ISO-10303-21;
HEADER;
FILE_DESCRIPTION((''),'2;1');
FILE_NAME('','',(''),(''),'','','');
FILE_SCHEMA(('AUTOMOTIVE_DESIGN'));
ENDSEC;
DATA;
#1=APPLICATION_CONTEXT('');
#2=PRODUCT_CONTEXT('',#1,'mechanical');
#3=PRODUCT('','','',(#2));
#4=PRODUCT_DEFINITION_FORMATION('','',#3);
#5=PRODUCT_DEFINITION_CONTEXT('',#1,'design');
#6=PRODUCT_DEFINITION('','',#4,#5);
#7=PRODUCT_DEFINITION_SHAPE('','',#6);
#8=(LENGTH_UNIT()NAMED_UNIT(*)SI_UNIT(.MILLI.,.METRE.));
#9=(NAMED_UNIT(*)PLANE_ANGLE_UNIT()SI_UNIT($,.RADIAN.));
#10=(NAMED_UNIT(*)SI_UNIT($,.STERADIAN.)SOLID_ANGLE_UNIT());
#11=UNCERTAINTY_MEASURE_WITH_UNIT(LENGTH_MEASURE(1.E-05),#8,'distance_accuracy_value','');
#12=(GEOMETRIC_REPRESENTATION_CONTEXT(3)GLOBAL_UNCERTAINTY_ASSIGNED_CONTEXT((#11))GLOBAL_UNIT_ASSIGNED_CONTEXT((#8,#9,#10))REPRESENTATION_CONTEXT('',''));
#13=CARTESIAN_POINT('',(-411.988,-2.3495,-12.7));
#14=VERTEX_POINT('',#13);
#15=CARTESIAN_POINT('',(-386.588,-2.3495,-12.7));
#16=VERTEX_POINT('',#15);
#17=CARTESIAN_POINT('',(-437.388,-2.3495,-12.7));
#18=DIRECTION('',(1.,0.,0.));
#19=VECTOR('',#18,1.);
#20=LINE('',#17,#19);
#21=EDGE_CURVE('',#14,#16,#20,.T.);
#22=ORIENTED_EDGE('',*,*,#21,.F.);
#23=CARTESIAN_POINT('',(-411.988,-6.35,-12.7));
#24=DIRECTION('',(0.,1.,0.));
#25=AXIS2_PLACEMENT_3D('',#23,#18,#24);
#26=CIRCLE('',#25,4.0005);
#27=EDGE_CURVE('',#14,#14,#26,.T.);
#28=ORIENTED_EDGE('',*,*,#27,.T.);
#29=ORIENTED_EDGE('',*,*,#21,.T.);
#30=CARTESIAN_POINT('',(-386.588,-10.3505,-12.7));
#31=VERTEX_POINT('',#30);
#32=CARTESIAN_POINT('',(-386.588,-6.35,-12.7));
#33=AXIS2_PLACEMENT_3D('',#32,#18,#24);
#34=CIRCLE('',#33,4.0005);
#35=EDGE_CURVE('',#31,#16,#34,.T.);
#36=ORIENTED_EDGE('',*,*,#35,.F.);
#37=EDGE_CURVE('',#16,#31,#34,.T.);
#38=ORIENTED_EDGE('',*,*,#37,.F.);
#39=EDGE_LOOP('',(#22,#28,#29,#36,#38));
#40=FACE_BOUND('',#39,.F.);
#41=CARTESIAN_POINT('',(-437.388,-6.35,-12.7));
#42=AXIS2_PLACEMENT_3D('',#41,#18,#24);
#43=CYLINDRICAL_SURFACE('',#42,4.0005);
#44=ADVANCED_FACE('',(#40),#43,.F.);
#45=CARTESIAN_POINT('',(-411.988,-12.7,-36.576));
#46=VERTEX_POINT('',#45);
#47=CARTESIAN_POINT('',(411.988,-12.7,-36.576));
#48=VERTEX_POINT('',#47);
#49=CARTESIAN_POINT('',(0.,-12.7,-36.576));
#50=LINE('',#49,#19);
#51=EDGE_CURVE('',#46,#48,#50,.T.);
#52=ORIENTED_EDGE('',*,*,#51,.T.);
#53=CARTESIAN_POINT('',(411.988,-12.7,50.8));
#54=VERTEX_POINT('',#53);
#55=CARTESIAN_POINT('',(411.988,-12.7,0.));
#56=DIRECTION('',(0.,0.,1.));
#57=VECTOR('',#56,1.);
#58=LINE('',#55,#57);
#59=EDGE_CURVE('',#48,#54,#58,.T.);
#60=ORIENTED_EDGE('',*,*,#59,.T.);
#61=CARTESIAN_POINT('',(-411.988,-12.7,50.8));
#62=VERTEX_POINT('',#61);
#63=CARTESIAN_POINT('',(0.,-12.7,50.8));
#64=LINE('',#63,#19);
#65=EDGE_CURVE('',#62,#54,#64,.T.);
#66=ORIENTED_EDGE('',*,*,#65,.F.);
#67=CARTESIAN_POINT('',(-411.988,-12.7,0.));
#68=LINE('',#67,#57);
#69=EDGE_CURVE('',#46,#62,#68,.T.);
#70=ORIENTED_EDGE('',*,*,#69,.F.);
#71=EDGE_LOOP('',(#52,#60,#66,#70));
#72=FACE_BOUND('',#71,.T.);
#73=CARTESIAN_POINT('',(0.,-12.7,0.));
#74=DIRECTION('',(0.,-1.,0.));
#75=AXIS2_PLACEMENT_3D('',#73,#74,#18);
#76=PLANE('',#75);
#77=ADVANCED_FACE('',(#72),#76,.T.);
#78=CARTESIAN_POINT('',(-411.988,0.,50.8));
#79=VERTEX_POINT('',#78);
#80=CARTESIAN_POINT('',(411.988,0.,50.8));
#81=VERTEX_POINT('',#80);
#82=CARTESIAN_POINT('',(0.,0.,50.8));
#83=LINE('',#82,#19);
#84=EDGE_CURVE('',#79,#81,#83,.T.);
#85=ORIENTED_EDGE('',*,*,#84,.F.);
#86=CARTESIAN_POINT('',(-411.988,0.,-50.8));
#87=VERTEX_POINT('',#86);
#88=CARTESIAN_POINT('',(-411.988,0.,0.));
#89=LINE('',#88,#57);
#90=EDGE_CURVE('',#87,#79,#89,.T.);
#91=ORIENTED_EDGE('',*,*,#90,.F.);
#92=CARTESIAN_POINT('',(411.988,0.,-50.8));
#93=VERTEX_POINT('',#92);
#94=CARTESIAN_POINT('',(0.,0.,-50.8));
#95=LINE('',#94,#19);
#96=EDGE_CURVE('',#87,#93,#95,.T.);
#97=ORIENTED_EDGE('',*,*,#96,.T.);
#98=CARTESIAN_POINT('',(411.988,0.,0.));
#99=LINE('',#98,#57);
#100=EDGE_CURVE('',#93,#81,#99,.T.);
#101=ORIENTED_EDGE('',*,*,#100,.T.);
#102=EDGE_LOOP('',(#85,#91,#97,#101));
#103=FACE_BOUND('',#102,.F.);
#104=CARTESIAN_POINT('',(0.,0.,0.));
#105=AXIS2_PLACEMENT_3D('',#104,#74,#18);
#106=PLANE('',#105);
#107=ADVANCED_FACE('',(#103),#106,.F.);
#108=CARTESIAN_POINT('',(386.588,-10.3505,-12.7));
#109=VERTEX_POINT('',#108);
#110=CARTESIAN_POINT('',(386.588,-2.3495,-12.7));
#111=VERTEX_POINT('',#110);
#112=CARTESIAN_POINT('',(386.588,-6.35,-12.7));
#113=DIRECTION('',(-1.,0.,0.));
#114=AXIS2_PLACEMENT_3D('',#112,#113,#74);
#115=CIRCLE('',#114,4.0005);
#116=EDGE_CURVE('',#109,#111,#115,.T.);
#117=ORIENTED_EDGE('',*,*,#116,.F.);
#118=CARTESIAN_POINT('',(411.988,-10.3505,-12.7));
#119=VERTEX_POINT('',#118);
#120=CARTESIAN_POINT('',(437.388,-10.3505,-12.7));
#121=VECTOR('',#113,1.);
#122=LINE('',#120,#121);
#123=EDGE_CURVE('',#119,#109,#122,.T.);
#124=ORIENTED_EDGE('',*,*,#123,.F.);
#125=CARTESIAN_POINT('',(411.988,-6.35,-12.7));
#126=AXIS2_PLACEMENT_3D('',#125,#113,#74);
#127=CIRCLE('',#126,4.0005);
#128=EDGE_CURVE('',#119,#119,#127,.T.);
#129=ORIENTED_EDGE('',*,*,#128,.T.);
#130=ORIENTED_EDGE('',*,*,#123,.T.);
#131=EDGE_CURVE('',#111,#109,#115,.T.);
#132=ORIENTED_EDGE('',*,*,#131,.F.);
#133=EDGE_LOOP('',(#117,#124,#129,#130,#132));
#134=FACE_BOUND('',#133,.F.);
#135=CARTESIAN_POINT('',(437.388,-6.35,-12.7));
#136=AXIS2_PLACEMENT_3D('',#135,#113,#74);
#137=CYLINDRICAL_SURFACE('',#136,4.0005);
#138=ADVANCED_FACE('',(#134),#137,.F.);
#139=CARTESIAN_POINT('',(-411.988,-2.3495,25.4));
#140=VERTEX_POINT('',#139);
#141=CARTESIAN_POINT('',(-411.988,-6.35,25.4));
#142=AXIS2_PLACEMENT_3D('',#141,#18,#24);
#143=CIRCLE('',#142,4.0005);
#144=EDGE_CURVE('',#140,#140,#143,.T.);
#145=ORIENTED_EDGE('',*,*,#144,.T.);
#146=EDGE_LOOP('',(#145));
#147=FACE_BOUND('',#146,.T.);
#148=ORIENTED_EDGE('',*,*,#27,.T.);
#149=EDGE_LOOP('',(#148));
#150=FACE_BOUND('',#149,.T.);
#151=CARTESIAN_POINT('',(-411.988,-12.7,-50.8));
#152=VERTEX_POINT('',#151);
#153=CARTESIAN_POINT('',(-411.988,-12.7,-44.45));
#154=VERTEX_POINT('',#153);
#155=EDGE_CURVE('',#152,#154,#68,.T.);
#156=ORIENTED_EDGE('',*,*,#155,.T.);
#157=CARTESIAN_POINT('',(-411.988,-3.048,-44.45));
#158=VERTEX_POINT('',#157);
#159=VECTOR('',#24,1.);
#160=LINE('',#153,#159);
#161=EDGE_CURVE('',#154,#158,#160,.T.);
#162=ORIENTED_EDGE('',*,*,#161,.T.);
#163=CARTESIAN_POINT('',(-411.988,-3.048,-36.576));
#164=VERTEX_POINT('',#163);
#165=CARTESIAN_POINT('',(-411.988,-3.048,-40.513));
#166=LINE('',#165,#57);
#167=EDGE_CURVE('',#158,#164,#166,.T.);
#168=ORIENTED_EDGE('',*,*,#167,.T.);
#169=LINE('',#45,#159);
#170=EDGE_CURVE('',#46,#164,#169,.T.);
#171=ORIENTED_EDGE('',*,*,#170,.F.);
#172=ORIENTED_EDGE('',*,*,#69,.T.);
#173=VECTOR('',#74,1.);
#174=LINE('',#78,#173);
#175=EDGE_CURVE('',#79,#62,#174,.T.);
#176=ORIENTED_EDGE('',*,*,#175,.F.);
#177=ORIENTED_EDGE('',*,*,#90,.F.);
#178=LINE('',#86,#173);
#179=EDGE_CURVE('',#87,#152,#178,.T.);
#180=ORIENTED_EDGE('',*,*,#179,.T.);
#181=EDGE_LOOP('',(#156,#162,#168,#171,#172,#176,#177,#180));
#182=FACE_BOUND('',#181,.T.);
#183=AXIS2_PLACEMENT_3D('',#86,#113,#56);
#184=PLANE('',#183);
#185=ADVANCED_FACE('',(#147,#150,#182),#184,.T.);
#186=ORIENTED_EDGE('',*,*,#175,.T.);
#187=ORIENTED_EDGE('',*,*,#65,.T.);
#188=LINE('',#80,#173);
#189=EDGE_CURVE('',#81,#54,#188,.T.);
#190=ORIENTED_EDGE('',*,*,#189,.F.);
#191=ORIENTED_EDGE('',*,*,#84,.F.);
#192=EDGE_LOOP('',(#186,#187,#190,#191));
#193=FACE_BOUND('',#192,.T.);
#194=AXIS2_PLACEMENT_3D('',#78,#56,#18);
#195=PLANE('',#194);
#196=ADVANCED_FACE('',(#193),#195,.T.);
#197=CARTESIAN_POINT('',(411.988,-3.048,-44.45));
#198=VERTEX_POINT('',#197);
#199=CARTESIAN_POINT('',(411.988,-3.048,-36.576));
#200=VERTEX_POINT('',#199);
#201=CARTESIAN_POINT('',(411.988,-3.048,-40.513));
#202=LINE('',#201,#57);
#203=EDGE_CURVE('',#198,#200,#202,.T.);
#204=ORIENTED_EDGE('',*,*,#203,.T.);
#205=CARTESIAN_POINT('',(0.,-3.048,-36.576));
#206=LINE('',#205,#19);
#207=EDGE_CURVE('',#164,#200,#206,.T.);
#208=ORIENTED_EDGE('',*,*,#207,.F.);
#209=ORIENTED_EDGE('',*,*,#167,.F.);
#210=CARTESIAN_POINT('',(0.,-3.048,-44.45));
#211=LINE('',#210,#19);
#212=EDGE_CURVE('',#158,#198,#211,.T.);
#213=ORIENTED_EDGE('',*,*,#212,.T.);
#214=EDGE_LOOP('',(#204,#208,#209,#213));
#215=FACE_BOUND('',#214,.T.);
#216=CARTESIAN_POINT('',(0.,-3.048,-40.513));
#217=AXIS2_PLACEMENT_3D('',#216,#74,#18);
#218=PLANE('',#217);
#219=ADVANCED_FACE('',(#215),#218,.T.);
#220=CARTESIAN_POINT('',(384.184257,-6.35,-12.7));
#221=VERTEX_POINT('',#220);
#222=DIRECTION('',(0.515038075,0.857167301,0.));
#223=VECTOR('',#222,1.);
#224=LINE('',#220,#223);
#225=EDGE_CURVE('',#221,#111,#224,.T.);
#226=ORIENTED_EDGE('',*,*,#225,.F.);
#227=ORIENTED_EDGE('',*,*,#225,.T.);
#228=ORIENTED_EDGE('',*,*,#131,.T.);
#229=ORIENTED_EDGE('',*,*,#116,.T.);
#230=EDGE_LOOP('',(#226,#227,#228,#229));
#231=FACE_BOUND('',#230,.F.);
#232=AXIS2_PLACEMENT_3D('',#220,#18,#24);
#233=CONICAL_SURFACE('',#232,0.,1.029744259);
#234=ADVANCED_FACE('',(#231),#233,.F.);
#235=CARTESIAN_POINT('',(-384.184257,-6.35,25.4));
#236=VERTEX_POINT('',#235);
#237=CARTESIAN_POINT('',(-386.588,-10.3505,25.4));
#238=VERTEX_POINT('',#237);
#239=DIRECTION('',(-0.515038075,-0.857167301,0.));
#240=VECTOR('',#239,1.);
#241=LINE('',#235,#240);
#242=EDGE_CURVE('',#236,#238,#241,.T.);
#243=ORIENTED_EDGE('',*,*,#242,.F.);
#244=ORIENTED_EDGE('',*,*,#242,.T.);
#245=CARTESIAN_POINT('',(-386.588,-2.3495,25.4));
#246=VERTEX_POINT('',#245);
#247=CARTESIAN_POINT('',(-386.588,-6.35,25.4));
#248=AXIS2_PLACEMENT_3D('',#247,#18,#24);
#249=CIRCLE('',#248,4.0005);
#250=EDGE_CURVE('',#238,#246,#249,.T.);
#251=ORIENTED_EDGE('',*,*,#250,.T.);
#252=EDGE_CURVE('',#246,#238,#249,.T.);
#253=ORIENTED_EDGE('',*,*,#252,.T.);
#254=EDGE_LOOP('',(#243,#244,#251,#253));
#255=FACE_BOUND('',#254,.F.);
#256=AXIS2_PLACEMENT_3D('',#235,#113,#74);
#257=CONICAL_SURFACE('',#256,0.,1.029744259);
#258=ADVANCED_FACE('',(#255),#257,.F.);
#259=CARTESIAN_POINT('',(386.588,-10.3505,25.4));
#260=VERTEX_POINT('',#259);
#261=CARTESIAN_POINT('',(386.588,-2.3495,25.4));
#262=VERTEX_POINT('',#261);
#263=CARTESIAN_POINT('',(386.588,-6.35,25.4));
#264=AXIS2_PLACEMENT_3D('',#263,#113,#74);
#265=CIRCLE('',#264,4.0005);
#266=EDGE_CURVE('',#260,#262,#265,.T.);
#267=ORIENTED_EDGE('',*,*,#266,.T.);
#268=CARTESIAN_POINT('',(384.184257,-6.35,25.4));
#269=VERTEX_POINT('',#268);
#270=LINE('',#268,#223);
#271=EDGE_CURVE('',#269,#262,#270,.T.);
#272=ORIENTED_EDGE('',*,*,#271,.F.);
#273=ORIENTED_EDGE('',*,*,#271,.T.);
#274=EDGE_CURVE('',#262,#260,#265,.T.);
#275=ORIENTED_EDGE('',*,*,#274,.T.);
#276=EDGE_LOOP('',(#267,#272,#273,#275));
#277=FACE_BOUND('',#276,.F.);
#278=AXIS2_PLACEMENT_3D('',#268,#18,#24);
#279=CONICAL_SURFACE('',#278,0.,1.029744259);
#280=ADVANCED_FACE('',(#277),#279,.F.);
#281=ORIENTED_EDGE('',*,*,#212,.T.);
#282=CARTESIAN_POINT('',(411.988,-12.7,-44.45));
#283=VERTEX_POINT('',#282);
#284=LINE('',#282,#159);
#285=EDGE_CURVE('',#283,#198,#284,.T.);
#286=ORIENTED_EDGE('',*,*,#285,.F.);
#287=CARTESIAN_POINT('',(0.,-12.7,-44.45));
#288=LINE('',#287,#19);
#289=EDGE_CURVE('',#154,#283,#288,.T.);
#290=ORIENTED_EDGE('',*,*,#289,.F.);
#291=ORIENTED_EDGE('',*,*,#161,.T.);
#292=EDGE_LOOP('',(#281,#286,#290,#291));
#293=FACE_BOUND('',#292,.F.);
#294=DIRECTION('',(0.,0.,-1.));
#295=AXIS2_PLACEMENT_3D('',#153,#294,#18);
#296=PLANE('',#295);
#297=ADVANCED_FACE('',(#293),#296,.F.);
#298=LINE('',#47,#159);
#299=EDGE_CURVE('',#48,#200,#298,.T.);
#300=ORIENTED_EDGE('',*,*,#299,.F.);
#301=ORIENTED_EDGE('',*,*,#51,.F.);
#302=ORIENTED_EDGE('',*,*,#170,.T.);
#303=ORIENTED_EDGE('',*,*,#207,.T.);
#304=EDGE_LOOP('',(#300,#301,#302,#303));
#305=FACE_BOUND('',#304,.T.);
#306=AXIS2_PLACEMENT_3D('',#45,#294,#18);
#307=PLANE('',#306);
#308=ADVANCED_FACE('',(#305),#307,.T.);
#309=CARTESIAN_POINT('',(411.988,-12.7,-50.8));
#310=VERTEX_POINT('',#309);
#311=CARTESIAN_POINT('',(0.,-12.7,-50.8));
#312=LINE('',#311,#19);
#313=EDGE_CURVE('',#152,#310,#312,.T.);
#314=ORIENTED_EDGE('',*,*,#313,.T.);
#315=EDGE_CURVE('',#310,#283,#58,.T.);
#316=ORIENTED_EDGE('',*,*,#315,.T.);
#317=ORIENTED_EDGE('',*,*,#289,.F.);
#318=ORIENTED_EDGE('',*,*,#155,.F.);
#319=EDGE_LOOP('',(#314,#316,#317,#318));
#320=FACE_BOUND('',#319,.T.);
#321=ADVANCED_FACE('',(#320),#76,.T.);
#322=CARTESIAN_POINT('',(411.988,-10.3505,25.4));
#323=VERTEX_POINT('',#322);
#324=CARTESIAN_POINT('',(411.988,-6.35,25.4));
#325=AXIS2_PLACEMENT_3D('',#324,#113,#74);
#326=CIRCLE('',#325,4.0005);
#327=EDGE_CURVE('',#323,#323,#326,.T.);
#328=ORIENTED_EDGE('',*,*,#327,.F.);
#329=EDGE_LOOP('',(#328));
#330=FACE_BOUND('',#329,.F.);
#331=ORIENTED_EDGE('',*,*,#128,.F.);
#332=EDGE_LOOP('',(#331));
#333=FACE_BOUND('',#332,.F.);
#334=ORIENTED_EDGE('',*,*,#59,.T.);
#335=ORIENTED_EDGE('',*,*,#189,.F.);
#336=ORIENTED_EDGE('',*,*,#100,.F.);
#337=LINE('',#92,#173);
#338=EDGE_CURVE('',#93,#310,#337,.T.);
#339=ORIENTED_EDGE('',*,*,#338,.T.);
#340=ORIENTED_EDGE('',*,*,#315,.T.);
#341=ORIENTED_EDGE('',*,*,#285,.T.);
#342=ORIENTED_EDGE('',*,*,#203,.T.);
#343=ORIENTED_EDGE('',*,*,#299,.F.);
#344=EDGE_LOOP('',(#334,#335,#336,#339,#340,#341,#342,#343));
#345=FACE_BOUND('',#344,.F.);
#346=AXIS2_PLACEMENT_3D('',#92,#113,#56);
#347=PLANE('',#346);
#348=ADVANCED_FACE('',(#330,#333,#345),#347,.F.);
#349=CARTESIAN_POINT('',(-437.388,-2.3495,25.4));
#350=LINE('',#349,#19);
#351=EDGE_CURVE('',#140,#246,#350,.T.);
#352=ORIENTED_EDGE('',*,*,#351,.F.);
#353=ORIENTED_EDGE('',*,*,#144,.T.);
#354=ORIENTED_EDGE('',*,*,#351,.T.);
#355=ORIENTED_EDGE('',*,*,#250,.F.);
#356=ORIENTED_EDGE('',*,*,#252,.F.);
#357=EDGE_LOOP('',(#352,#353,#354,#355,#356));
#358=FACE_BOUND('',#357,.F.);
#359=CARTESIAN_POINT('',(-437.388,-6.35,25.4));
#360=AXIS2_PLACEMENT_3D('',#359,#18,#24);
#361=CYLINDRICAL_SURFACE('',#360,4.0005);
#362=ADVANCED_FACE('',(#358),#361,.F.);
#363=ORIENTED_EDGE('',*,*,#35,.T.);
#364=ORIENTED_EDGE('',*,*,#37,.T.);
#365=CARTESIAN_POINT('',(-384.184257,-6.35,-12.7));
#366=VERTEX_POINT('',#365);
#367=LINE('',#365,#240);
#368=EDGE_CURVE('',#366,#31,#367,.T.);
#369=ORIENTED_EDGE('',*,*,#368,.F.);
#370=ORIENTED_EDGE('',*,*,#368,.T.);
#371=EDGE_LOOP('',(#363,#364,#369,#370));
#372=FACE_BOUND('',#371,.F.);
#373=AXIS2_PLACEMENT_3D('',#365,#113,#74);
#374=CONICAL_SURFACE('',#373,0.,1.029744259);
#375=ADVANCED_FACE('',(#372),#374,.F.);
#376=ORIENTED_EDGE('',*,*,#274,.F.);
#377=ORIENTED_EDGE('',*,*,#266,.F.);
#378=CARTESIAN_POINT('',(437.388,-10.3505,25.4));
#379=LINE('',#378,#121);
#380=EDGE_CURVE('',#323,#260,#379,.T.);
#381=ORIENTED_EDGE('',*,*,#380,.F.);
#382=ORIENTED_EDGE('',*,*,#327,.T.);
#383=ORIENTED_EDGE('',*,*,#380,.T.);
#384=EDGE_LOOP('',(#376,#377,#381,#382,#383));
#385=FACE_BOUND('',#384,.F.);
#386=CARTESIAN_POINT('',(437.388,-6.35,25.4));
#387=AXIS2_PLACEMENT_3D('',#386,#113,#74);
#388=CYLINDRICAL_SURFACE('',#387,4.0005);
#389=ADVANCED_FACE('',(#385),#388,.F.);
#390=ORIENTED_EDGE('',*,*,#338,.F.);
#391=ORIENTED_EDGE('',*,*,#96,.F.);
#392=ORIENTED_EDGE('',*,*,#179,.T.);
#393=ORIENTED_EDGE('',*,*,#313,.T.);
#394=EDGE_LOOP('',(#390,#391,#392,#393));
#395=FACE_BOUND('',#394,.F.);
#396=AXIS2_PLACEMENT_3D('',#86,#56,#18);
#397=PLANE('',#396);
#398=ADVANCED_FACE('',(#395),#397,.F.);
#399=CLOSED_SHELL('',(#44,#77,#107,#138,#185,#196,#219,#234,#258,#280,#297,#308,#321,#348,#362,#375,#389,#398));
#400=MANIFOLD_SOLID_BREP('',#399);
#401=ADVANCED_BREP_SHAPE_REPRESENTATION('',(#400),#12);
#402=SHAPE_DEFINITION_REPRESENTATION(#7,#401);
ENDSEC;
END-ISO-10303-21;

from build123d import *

# Parameters (mm, degrees)
F0_W     = 823.976
F0_H     = 101.6
F1_DEPTH = 12.7
F2_W     = 823.976
F2_H     = 7.874
F3_DEPTH = 9.652
F5_D     = 8.001
F5_DEPTH = 25.4
F5_TIP   = 2.4037429064
F7_D     = 8.001
F7_DEPTH = 25.4
F7_TIP   = 2.4037429064


# Not quite as in the source:
# - a feature names something its author has since deleted; it is built from what else it names


with BuildPart() as f1:
    # F0 (on Front) → F1 (new body)
    with BuildSketch(Plane.XZ):
        Rectangle(F0_W, F0_H)
    extrude(amount=F1_DEPTH)

    # F2 (on face) → F3 (cut)
    with BuildSketch(Plane.XZ.offset(12.7)):
        with Locations((0, -40.513)):
            Rectangle(F2_W, F2_H)
    extrude(amount=-F3_DEPTH, mode=Mode.SUBTRACT)

    # F5
    with Locations(Plane(origin=(-411.988, 0, 0), x_dir=(0, -1, 0), z_dir=(-1, 0, 0))):
        with Locations((6.35, 25.4), (6.35, -12.7)):
            Hole(F5_D / 2, depth=F5_DEPTH)
            with Locations((0, 0, -(F5_DEPTH + F5_TIP / 2))):  # 118° drill point
                Cone(0, F5_D / 2, F5_TIP, mode=Mode.SUBTRACT)

    # F7
    with Locations(Plane.YZ.offset(411.988)):
        with Locations((-6.35, 25.4), (-6.35, -12.7)):
            Hole(F7_D / 2, depth=F7_DEPTH)
            with Locations((0, 0, -(F7_DEPTH + F7_TIP / 2))):  # 118° drill point
                Cone(0, F7_D / 2, F7_TIP, mode=Mode.SUBTRACT)


solid = f1.part
